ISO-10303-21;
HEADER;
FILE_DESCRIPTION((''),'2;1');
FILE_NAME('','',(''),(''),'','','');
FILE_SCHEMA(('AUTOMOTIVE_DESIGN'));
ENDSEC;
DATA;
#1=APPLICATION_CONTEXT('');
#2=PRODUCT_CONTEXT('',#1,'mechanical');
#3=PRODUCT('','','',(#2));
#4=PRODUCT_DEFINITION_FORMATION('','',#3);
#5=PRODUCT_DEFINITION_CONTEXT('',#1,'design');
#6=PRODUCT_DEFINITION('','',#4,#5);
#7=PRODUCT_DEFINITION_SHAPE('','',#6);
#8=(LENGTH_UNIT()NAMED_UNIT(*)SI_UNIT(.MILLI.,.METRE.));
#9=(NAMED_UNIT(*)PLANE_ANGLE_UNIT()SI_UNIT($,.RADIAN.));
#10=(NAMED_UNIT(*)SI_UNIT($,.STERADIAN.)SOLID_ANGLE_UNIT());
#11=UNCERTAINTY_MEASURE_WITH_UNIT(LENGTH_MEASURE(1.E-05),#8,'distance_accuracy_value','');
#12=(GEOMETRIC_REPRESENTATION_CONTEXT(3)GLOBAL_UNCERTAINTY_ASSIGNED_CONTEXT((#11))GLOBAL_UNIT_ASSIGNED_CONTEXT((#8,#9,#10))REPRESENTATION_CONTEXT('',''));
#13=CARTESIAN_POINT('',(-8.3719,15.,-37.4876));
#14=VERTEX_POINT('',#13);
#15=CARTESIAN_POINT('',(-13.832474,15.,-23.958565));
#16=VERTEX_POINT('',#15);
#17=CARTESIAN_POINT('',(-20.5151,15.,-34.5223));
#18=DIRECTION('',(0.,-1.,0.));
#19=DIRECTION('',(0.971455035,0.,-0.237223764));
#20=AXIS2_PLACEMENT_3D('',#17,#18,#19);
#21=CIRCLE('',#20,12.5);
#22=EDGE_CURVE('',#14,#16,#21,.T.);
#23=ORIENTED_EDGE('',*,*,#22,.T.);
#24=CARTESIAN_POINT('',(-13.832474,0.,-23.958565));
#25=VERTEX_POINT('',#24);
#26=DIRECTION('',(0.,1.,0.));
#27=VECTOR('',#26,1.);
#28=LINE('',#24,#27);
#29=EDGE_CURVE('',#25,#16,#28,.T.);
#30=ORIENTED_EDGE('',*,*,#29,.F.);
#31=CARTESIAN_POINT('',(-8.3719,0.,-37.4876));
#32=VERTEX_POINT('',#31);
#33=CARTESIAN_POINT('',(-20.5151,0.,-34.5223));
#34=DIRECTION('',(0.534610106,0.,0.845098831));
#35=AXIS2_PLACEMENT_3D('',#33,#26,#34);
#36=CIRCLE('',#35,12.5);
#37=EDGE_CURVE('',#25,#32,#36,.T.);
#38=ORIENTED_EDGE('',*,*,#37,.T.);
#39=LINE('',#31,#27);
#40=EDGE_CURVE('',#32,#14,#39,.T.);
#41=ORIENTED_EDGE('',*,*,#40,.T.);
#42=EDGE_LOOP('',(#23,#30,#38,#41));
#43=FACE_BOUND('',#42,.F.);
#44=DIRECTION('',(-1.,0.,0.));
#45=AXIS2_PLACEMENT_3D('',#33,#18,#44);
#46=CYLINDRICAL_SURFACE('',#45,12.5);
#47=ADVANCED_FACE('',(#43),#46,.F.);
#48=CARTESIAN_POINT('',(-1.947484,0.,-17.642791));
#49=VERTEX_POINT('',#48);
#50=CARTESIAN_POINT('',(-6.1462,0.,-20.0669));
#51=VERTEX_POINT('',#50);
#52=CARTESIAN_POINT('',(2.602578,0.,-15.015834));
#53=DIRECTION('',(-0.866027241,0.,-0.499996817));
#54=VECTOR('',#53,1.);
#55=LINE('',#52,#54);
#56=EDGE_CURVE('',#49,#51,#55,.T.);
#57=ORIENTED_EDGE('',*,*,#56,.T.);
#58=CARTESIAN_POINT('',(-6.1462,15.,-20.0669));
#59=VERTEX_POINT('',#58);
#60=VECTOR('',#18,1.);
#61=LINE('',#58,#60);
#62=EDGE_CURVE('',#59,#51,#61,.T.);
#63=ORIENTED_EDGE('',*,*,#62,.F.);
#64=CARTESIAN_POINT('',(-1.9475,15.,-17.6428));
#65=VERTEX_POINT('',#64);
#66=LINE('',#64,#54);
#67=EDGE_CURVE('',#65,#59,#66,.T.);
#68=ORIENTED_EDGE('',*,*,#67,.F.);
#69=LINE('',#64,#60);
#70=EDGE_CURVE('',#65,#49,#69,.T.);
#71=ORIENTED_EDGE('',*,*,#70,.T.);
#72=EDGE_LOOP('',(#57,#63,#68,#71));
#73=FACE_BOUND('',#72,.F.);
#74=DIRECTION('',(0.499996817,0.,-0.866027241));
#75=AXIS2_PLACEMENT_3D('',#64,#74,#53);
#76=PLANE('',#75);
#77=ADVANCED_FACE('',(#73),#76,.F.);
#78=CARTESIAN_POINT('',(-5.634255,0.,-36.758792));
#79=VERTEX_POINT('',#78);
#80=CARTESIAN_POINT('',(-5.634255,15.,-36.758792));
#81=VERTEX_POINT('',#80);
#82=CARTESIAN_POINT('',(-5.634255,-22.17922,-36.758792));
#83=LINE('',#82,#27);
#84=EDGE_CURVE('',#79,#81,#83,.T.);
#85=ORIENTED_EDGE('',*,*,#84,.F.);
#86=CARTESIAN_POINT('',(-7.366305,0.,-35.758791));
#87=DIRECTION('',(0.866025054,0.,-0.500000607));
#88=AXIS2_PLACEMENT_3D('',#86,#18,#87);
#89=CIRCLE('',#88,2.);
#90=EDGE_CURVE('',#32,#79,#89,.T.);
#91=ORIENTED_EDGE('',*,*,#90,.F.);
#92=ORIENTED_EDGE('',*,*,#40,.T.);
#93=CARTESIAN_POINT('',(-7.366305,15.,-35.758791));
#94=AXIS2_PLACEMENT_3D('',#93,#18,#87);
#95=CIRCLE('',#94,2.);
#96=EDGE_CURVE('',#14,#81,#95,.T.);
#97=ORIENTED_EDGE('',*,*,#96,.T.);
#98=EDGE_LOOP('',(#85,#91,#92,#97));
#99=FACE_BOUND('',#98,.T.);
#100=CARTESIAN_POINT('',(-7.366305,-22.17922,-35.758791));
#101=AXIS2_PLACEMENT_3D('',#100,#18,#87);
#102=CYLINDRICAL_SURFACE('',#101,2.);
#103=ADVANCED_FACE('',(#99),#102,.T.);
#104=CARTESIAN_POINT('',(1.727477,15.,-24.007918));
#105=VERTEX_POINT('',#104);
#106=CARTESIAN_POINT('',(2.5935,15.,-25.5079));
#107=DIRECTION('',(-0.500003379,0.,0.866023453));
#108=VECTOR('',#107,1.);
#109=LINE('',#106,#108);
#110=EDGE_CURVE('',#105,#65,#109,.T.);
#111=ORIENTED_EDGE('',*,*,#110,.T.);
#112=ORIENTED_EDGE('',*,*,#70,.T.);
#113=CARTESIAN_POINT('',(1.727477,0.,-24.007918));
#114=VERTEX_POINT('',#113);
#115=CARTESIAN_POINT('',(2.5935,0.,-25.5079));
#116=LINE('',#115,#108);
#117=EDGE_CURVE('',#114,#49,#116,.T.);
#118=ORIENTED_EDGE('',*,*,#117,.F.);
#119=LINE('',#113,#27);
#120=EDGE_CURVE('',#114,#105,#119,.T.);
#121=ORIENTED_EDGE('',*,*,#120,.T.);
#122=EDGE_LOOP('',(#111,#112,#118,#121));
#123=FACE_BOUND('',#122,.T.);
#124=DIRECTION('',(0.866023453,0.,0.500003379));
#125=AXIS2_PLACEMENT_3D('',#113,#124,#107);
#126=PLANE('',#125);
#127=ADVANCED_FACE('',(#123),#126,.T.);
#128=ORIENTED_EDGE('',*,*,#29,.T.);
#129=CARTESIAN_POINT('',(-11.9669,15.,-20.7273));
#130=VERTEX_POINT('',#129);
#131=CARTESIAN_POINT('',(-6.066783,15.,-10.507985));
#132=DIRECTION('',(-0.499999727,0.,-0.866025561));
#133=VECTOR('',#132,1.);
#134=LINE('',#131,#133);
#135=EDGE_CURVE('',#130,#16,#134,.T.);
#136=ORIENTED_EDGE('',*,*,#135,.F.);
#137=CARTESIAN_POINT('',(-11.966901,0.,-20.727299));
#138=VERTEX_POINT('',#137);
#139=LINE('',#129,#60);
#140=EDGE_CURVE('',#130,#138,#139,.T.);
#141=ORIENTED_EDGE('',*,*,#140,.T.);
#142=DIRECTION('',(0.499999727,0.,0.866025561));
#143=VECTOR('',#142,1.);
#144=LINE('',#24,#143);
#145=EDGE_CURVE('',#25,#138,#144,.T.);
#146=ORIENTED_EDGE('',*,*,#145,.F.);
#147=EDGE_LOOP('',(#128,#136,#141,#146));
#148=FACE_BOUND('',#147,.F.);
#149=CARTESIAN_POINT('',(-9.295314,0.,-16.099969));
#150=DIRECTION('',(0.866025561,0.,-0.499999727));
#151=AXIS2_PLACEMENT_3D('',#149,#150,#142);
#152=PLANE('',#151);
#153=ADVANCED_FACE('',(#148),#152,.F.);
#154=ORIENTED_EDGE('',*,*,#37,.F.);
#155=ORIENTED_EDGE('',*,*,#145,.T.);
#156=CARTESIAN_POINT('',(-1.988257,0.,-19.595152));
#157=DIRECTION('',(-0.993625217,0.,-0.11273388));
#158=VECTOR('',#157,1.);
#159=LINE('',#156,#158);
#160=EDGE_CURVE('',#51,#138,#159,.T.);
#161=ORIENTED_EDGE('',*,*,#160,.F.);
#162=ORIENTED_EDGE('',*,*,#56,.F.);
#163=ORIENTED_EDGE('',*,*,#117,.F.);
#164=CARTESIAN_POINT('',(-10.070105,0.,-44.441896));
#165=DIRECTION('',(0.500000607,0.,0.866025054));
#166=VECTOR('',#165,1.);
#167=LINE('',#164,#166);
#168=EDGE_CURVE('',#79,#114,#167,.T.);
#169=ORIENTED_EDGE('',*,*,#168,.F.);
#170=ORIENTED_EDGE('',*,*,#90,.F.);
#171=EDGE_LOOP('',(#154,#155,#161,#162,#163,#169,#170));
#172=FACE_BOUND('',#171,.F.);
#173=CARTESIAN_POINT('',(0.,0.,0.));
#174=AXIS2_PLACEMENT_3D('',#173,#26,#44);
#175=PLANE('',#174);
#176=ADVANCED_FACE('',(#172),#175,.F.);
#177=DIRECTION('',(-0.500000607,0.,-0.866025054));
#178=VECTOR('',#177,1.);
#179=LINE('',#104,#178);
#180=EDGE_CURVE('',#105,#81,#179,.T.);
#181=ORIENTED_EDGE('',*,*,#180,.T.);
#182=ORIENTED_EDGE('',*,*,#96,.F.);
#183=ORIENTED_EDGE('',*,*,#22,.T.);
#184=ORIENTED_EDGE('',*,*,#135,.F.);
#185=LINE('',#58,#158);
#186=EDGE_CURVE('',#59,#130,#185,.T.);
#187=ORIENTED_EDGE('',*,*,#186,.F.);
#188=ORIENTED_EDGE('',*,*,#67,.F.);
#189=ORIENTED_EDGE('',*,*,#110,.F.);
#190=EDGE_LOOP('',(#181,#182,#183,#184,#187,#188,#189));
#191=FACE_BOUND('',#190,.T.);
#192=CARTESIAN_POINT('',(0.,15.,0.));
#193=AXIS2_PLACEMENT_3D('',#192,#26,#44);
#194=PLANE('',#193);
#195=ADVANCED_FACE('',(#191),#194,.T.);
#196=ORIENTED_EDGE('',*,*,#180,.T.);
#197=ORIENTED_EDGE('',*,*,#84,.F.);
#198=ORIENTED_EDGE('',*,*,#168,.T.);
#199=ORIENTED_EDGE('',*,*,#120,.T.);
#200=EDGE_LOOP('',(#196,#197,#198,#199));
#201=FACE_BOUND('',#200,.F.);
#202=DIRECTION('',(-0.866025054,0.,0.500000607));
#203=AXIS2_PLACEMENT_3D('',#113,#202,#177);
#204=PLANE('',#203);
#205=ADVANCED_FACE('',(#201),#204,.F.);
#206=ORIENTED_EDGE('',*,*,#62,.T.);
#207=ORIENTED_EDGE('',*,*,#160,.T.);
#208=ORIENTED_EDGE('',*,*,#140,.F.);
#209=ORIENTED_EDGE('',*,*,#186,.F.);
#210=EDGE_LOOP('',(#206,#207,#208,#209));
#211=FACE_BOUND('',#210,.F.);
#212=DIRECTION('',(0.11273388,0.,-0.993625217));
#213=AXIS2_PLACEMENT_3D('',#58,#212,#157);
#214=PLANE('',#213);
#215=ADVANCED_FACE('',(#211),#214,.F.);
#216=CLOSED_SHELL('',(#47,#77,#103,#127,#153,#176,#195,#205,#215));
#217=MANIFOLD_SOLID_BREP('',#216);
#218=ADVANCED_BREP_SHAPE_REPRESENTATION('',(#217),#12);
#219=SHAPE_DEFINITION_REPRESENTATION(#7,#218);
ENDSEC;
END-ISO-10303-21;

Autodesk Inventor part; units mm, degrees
ref_plane "YZ Plane" through (0, 0, 0) normal (1, 0, 0) x (0, 1, 0)
ref_plane "XZ Plane" through (0, 0, 0) normal (0, 1, 0) x (-1, 0, 0)
ref_plane "XY Plane" through (0, 0, 0) normal (0, 0, 1) x (1, 0, 0)
sketch "スケッチ2" plane through (0, 0, 0) normal (0, 1, 0) x (-1, 0, 0)
  line L0 (0, 0) -> (-8.6603, -15)
  line L1 (-8.6603, -15) -> (11.3397, -49.641)
  line L2 (73.7428, 0) -> (-22.3941, 0) projected
  line L3 (11.3397, -49.641) -> (5.9252, -52.7671) construction
  line L4 (0, 0) -> (-6.6711, 3.8516) construction
  line L5 (11.3397, -49.641) -> (24.3301, -42.141)
  line L6 (24.3301, -42.141) -> (0, 0)
  line L7 (0, 0) -> (8.2272, -4.75)
  line L8 (8.2272, -4.75) -> (-3.1754, -24.5)
  line L9 (-2.5935, -25.5079) -> (9.1002, -5.254)
  line L10 (9.1002, -5.254) -> (8.2272, -4.75)
  line L11 (-3.1754, -24.5) -> (2.5403, -27.8)
  line L12 (2.5403, -27.8) -> (12.2903, -10.9125)
  line L13 (12.2903, -10.9125) -> (6.5746, -7.6125)
  line L14 (6.5746, -7.6125) -> (-3.1754, -24.5)
  line L15 (11.3397, -49.641) -> (31.9282, -37.7543)
  line L16 (31.9282, -37.7543) -> (38.6416, -26.1264)
  line L17 (6.3397, -40.9808) -> (21.9282, -31.9808) construction
  line L18 (21.9282, -31.9808) -> (31.9282, -37.7543)
  line L19 (12.2903, -10.9125) -> (38.6416, -26.1264)
  line L20 (38.6416, -26.1264) -> (3.5066, -26.1264)
  line L21 (0, 0) -> (21.3397, 36.9615)
  line L22 (21.3397, 36.9615) -> (15.2136, 40.4985)
  line L23 (-0.5996, -1.0385) -> (60.009, -1.0385)
  circle A0 centre (21.3397, -13.5385) radius 12.5 construction
  circle A1 centre (21.3397, -13.5385) radius 10.5 construction
  circle A2 centre (20.5151, -34.5223) radius 10.5 construction
  circle A3 centre (20.5151, -34.5223) radius 11.5 construction
  circle A4 centre (20.5151, -34.5223) radius 12.5
  line L24 (8.3719, -37.4876) -> (11.3397, -49.641)
  line L25 (-2.3094, -23) -> (12.6388, -48.891)
  point P0 (9.2953, -16.1)
  point P1 (7.4475, -8.1165)
  point P2 (-2.3025, -25.004)
  point P3 (15.0841, -26.1264)
  point P4 (11.2545, -26.1264)
  point P5 (6.0668, -10.5079)
  point P6 (13.8325, -23.9586)
  point P7 (10.0702, -44.4421)
  point P8 (-1.7275, -24.0079)
  dimension "d34" = 25
  dimension "d11" = 60
  dimension "d12" = 60
  dimension "d13" = 40
  dimension "d15" = 15
  dimension "d16" = 9.5
  dimension "d17" = 1.0079
  dimension "d18" = 19.5
  dimension "d19" = 6.6
  dimension "d24" = 18
  dimension "d25" = 30
  dimension "d26" = 60
  dimension "d28" = 60
  dimension "d29" = 38
  dimension "d30" = 25
  dimension "d31" = 21
  dimension "d32" = 21
  dimension "d33" = 23
  dimension "d40" = 1.5
extrude "押し出し4" add sketch "スケッチ2" along normal blind 15 contours L6 L12 L11 L25 L9 | L6 A4 L20 L12 | L11 L12 L20 A4 L24 L25
fillet "フィレット1" radius 2 1 edges at (-10.0702, 7.5, -44.4421)
sketch "スケッチ3" plane through (0, 15, 0) normal (0, 1, 0) x (1, 0, 0)
  ellipse E0 centre (-16.5607, 22.817) end of major axis (-18.0607, 20.2189) minor radius 2.9999 (-18.4056, 20.4514) -> (-17.74, 20.0585) ccw projected
  ellipse E1 centre (-20.6882, 13.1623) end of major axis (-16.9382, 19.6575) minor radius 7.4997 (-13.3193, 14.5576) -> (-17.74, 20.0585) ccw projected
  line L0 (-13.3193, 14.5576) -> (-11.4591, 4.7323) projected
  line L1 (-11.4591, 4.7323) -> (-7.1359, 7.9366) projected
  line L2 (-7.1359, 7.9366) -> (-2.1359, 16.5968) projected
  line L3 (-2.1359, 16.5968) -> (-6.4659, 19.0967) projected
  line L4 (-6.4659, 19.0967) -> (-18.4056, 20.4514) projected
  line L5 (-6.0668, 10.5079) -> (1.7275, 24.0079) projected
  line L6 (-1.9475, 17.6428) -> (-6.1462, 20.0669)
  line L7 (-6.1462, 20.0669) -> (-11.9669, 20.7273)
  line L8 (-13.8325, 23.9586) -> (-6.0668, 10.5079) projected
  point P0 (0, 0)
  point P1 (2.5935, 25.5079)
  dimension "d36" = 1
  dimension "d37" = 1
extrude "押し出し5" cut sketch "スケッチ3" against normal through all contours L8 L7 L6 L5 L3 L4 | L4 L3 L5 L8
equation "\"d37\" = d36"
properties part number "base_backwall_setter_under"
